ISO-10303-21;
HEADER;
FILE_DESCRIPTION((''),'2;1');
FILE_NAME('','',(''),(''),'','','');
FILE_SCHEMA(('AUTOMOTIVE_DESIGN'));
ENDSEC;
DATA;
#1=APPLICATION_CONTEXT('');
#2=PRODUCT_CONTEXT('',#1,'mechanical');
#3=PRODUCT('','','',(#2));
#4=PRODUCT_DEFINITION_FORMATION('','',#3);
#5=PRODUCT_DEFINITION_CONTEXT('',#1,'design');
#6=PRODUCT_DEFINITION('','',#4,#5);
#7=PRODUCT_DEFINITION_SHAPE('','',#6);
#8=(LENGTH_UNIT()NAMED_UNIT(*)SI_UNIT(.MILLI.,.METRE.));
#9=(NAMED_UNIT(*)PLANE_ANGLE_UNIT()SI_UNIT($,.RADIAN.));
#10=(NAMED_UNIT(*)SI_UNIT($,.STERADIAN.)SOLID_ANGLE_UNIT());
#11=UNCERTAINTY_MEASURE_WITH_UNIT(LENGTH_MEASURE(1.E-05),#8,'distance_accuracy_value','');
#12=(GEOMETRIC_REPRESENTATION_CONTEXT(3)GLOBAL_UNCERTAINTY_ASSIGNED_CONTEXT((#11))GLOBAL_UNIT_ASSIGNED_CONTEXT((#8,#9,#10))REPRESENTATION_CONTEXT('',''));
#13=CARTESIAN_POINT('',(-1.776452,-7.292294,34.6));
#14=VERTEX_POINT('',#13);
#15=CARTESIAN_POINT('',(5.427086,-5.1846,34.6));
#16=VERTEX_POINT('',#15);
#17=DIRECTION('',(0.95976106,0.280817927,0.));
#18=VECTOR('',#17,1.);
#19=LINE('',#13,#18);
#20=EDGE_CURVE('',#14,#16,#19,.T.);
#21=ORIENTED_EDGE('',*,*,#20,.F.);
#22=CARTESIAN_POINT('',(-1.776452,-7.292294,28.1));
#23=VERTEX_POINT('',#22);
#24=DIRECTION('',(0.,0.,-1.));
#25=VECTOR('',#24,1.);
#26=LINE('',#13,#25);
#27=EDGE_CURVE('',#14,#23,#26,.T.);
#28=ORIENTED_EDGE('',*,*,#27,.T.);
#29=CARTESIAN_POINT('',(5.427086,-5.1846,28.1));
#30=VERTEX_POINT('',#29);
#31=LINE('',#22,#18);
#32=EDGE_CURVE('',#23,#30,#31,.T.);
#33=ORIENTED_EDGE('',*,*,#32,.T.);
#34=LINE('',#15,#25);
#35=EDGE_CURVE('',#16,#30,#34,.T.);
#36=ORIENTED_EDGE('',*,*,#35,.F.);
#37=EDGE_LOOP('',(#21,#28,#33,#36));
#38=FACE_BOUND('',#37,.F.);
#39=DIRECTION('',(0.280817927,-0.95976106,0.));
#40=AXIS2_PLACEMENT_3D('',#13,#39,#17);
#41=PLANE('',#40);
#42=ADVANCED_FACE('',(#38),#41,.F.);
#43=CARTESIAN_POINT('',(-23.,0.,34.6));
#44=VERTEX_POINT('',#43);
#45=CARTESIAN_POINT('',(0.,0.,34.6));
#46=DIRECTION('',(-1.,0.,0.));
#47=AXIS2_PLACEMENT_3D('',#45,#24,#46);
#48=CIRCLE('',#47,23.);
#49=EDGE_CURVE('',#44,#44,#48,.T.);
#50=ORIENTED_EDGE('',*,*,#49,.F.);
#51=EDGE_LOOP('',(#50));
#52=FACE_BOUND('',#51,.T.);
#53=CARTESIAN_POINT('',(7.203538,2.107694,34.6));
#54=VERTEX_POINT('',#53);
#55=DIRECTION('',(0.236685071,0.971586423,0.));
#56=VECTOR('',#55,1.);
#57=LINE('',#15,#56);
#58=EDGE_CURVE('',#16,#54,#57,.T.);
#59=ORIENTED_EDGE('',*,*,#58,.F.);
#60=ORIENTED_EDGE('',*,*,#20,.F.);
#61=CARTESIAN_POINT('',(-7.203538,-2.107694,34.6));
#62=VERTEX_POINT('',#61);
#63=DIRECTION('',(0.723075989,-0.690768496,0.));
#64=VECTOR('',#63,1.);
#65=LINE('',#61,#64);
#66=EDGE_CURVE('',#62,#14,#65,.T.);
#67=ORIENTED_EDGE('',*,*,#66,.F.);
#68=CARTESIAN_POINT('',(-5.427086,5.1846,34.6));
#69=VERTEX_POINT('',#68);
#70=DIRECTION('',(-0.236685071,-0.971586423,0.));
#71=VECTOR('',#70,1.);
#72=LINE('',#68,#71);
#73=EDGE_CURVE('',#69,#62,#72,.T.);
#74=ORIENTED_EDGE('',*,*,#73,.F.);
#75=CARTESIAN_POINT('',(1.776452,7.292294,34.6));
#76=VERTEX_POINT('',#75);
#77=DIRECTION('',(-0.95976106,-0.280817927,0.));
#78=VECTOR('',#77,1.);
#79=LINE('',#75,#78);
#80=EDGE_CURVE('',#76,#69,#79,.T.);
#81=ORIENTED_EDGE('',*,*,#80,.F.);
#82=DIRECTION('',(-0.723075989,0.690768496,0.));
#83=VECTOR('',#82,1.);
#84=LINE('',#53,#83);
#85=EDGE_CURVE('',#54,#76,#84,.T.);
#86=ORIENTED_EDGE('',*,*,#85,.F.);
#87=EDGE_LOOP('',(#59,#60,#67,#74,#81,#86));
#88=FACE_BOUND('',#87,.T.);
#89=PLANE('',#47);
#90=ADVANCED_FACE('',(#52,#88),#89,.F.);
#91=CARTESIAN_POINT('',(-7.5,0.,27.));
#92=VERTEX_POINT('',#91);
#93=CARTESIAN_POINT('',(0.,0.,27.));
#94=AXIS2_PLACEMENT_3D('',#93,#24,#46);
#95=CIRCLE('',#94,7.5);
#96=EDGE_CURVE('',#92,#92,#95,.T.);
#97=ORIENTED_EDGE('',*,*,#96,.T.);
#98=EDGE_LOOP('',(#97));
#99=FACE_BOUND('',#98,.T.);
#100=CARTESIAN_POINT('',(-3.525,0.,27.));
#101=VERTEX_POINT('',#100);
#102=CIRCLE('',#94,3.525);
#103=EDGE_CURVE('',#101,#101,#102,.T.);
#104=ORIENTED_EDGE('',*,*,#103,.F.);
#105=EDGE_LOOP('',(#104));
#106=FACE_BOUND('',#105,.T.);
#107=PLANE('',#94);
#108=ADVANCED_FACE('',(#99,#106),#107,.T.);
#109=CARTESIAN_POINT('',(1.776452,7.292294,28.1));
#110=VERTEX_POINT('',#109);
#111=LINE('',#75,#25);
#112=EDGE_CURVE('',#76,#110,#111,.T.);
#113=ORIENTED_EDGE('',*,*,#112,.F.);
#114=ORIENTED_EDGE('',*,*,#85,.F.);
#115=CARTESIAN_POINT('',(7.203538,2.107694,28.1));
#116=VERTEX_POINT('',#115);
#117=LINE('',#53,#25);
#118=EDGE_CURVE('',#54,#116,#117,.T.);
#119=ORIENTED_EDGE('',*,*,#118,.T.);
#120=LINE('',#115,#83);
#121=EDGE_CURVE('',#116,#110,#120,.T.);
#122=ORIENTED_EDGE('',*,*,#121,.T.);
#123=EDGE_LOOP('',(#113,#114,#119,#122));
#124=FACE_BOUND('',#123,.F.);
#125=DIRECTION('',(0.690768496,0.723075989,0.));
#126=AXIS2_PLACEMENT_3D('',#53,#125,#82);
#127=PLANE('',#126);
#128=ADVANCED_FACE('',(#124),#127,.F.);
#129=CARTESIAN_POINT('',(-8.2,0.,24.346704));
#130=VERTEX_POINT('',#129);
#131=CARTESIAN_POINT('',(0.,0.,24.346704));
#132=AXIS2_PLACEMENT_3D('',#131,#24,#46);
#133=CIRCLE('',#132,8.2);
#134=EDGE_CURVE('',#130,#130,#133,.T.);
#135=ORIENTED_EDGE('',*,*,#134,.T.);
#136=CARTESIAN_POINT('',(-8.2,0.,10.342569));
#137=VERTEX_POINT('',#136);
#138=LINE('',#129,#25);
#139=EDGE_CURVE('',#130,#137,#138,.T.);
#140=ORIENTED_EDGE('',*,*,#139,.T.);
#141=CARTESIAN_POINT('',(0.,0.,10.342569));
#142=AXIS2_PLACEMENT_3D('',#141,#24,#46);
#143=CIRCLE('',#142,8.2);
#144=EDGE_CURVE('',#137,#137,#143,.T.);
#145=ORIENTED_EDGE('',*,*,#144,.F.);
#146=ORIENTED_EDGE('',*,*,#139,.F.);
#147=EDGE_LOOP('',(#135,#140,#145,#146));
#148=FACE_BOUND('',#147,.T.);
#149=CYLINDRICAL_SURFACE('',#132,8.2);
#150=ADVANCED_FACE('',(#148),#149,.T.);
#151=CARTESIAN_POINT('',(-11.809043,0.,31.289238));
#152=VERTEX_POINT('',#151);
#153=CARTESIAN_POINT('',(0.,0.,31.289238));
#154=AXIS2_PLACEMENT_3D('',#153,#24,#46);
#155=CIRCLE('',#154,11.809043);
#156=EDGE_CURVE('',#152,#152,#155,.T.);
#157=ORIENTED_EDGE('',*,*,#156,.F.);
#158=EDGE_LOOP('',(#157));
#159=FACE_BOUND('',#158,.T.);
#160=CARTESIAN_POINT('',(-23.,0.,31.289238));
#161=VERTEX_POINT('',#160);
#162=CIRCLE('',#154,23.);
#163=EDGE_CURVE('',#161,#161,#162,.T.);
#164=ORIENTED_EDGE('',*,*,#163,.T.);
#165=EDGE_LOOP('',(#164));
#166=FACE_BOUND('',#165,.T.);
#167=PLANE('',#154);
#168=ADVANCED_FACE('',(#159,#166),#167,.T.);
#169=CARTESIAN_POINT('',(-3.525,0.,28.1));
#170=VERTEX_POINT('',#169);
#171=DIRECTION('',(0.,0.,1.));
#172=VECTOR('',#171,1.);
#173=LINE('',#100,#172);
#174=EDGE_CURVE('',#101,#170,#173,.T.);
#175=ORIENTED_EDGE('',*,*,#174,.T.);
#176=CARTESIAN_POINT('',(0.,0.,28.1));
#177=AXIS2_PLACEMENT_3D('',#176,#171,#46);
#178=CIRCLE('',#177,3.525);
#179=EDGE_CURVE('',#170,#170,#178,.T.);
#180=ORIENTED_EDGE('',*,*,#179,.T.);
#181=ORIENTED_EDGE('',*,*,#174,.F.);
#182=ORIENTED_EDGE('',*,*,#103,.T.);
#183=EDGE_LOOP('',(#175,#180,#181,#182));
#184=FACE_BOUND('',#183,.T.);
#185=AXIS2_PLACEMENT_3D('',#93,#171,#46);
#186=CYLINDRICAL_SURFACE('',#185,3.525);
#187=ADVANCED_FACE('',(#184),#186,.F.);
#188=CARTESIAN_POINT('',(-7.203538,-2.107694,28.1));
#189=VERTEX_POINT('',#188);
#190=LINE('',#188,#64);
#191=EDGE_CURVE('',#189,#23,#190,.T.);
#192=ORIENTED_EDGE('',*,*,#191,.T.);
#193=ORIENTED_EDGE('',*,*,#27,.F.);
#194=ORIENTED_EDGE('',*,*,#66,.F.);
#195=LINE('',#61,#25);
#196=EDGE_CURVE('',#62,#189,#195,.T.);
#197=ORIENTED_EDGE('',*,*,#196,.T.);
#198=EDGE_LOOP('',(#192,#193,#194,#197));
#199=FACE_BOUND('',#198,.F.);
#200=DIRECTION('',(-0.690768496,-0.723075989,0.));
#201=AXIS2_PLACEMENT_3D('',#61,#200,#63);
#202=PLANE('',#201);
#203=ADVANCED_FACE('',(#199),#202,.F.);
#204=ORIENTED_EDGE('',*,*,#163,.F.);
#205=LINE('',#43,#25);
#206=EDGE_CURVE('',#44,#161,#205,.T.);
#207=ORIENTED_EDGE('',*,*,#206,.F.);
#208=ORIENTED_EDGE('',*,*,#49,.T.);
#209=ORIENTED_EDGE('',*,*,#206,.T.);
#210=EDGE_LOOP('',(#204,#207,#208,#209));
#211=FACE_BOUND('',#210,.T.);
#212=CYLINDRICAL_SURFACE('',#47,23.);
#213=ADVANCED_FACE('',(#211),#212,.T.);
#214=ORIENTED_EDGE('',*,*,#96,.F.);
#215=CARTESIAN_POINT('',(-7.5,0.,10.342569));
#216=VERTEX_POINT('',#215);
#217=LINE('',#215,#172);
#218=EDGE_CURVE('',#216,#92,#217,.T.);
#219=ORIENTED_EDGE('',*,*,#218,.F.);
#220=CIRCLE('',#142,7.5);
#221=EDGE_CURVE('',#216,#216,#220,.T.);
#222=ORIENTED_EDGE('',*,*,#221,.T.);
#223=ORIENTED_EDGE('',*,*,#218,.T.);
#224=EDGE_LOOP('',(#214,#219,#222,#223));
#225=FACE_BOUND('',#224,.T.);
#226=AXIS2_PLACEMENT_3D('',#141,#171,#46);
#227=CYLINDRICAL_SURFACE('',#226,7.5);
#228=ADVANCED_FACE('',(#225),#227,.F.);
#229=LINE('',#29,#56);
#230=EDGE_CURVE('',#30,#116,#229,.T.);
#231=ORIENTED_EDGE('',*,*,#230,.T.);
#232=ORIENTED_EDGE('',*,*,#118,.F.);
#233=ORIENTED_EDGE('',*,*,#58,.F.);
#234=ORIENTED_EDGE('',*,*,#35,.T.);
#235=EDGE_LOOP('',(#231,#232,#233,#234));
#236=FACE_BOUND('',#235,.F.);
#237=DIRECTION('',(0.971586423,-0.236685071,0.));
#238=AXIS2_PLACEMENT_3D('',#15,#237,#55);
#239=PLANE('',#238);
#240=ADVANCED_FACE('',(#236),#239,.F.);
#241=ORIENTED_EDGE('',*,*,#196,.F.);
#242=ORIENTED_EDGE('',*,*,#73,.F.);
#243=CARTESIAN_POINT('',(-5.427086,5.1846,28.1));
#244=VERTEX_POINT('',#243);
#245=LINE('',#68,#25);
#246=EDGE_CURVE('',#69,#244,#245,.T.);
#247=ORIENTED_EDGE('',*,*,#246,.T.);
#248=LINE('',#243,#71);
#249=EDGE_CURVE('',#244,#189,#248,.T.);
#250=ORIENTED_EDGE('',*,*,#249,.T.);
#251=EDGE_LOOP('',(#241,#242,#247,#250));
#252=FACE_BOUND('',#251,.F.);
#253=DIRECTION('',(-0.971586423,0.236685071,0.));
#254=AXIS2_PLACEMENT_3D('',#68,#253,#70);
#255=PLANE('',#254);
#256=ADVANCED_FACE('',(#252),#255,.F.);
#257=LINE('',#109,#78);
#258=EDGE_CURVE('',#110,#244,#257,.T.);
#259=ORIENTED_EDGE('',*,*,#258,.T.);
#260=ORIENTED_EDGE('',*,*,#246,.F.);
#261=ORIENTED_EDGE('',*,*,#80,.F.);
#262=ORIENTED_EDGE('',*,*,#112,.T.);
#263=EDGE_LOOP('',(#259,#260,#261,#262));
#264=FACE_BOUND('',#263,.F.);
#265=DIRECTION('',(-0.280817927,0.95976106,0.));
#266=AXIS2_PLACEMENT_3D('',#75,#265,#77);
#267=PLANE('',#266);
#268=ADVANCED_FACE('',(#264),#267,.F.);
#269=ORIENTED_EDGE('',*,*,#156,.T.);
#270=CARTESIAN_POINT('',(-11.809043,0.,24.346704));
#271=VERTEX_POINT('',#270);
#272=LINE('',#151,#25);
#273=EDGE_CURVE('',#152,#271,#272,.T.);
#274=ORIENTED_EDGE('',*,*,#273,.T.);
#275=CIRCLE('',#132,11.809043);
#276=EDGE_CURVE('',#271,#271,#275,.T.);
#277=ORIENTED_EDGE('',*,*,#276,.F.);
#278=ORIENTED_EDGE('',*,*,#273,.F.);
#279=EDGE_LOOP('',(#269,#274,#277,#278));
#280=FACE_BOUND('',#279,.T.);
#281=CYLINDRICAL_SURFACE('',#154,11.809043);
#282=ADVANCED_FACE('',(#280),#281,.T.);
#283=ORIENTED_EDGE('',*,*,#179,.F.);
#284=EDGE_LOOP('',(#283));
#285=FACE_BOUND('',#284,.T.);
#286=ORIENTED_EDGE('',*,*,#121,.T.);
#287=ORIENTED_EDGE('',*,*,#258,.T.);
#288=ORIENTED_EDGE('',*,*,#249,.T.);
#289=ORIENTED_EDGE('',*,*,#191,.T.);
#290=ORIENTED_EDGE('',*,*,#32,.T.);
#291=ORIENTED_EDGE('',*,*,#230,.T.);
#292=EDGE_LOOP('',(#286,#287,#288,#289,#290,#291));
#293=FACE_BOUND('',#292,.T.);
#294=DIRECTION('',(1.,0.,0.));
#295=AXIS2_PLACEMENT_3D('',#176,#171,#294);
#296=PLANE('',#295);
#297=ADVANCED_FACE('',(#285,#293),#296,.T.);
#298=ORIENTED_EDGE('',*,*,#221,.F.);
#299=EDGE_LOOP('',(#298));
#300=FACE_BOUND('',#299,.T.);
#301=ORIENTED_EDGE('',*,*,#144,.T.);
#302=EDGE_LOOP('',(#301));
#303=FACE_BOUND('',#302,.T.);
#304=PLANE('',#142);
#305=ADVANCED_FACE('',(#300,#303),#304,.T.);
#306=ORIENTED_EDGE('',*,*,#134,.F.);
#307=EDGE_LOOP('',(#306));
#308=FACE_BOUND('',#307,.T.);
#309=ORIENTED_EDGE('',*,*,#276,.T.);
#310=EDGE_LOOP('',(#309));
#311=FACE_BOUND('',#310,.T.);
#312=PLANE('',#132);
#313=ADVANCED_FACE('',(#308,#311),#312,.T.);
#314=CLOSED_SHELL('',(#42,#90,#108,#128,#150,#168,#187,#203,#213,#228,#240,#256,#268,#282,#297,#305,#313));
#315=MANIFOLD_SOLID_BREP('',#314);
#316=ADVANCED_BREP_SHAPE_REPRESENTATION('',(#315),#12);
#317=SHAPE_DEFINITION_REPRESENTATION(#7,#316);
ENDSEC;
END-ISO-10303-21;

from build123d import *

# Parameters (mm, degrees)
F0_W     = 0.7
F0_H     = 7.9574310766
F2_R     = 3.525
F3_DEPTH = 6.5


# Not quite as in the source:
# - a feature names something its author has since deleted; it is built from what else it names


with BuildPart() as f1:
    # F0 (on Front) → F1 (revolve)
    with BuildSketch(Plane.XZ):
        Polygon((-8.2, 24.3467036635), (-8.2, 18.3), (-7.5, 18.3), (-7.5, 20.7), (-7.5, 27), (-3.525, 27), (-3.525, 28.3), (-3.525, 34.6), (-23, 34.6), (-23, 31.2892384827), (-11.8090426549, 31.2892384827), (-11.8090426549, 26.945874095), (-11.8090426549, 24.3467036635), align=None)
        with Locations((-7.85, 14.3212844617)):
            Rectangle(F0_W, F0_H)
    revolve(axis=Axis((0, 0, 19.15), (0, 0, -1)))

    # F2 (on face) → F3 (cut)
    with BuildSketch(Plane.XY.offset(34.6)):
        Polygon((-7.2035379805, -2.107693976), (-1.7764524637, -7.2922938762), (5.4270855169, -5.1845999003), (7.2035379805, 2.107693976), (1.7764524637, 7.2922938762), (-5.4270855169, 5.1845999003), align=None)
        Circle(F2_R, mode=Mode.SUBTRACT)
    extrude(amount=-F3_DEPTH, mode=Mode.SUBTRACT)


solid = f1.part
